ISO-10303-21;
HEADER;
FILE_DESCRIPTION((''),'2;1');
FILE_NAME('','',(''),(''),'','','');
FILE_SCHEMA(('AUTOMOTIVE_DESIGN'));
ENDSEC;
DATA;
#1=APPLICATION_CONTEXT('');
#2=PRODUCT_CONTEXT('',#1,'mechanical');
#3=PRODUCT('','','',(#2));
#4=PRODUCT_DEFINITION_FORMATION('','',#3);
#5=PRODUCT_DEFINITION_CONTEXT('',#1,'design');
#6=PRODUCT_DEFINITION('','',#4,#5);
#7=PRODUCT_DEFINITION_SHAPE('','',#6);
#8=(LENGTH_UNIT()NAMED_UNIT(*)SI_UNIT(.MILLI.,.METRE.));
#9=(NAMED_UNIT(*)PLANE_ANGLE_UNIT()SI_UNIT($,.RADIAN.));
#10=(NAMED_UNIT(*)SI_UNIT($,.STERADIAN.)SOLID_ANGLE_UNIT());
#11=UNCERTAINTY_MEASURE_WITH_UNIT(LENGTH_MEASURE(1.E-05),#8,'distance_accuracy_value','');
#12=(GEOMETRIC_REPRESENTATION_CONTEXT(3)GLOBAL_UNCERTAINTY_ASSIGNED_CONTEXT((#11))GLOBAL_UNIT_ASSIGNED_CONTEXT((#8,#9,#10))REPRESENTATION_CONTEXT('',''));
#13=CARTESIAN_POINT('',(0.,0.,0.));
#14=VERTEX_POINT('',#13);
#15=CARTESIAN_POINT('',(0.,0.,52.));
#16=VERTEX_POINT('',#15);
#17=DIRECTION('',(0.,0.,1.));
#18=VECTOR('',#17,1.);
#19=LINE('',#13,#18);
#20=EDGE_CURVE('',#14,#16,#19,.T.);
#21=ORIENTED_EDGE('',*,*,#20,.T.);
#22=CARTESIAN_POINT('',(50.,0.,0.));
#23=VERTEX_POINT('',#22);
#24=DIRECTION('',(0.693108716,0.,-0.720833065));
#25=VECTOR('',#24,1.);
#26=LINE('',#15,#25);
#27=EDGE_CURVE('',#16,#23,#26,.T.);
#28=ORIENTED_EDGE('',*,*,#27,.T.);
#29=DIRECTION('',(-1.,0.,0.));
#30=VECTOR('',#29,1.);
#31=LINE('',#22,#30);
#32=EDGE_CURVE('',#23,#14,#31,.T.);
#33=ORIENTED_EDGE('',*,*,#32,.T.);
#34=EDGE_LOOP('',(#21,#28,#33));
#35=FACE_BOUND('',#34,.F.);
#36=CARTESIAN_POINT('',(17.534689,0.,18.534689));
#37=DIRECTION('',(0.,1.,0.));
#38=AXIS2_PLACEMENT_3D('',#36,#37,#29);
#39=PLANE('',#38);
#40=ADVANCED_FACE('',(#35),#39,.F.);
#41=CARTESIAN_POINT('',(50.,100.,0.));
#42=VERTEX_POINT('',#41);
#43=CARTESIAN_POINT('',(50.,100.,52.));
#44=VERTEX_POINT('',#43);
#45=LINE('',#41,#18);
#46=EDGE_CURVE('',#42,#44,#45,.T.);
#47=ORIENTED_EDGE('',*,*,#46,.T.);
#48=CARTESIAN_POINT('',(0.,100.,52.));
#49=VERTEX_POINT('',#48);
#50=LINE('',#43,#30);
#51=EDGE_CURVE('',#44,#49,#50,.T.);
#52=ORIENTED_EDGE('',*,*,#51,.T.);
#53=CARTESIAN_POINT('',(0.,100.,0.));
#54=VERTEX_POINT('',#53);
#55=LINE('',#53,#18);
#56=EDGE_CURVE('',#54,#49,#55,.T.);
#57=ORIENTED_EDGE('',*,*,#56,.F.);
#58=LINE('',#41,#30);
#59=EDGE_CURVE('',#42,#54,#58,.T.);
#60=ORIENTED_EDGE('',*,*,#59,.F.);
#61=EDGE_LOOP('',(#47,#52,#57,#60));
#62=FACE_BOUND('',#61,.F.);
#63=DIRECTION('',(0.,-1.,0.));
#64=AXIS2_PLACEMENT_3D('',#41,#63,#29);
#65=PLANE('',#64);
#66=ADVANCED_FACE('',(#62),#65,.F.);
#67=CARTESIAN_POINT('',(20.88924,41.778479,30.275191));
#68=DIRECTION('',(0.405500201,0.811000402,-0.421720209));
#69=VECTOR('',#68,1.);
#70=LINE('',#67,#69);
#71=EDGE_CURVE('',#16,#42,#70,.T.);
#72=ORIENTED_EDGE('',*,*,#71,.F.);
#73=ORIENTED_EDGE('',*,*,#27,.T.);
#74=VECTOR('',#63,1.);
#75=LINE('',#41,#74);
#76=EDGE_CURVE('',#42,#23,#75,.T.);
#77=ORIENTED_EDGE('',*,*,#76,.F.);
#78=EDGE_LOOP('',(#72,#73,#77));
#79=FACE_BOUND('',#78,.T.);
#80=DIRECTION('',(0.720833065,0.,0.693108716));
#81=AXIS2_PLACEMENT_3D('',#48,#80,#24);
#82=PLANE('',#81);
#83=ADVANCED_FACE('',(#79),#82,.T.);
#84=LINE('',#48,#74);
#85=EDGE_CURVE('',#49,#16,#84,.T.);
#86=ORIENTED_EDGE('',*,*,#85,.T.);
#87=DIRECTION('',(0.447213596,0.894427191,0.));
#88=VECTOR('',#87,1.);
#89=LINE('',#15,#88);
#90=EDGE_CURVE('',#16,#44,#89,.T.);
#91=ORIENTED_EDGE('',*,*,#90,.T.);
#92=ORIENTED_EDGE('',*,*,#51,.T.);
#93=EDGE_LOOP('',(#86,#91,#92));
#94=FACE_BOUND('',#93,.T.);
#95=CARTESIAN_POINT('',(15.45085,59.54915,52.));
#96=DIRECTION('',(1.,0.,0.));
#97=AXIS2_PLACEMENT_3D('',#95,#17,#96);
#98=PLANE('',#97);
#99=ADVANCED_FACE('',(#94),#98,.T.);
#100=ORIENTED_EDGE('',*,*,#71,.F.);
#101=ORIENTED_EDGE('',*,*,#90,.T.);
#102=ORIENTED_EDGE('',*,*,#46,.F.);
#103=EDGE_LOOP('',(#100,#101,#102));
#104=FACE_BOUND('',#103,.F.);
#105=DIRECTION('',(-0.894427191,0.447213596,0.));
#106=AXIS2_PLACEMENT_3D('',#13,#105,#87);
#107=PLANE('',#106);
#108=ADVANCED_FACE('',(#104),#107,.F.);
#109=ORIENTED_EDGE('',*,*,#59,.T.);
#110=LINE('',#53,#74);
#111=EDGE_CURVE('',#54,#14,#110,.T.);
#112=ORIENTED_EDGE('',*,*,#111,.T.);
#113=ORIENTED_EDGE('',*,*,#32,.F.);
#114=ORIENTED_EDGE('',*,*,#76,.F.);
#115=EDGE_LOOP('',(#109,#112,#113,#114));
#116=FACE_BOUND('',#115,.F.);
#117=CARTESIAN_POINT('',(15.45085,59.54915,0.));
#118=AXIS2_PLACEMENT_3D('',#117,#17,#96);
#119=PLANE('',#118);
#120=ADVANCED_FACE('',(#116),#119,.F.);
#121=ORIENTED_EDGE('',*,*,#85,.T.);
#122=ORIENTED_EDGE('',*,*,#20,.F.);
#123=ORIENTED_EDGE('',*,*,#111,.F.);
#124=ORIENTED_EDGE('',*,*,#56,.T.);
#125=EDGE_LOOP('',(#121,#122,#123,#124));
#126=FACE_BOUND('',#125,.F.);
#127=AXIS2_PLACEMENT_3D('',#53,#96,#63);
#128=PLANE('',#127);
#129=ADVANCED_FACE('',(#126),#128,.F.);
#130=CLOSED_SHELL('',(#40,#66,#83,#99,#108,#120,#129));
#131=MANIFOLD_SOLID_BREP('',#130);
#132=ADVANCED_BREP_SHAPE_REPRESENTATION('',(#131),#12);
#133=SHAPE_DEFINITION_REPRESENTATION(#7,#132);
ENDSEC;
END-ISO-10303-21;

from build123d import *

# Parameters (mm, degrees)
F1_DEPTH = 52
F3_DEPTH = 100


# Not quite as in the source:
# - an extrude ends at something that could not be found from the text; its depth is read off the source's solid


with BuildPart() as f1:
    # F0 (on Top) → F1 (new body)
    with BuildSketch(Plane.XY):
        Polygon((0, 100), (0, 0), (50, 100), align=None)
    extrude(amount=F1_DEPTH)

    # F2 (on face) → F3 (join, through all)
    with BuildSketch(Plane(origin=(0, 100, 0), x_dir=(-1, 0, 0), z_dir=(0, 1, 0))):
        Polygon((0, 52), (-50, 0), (0, 0), align=None)
    extrude(amount=-F3_DEPTH)


solid = f1.part
